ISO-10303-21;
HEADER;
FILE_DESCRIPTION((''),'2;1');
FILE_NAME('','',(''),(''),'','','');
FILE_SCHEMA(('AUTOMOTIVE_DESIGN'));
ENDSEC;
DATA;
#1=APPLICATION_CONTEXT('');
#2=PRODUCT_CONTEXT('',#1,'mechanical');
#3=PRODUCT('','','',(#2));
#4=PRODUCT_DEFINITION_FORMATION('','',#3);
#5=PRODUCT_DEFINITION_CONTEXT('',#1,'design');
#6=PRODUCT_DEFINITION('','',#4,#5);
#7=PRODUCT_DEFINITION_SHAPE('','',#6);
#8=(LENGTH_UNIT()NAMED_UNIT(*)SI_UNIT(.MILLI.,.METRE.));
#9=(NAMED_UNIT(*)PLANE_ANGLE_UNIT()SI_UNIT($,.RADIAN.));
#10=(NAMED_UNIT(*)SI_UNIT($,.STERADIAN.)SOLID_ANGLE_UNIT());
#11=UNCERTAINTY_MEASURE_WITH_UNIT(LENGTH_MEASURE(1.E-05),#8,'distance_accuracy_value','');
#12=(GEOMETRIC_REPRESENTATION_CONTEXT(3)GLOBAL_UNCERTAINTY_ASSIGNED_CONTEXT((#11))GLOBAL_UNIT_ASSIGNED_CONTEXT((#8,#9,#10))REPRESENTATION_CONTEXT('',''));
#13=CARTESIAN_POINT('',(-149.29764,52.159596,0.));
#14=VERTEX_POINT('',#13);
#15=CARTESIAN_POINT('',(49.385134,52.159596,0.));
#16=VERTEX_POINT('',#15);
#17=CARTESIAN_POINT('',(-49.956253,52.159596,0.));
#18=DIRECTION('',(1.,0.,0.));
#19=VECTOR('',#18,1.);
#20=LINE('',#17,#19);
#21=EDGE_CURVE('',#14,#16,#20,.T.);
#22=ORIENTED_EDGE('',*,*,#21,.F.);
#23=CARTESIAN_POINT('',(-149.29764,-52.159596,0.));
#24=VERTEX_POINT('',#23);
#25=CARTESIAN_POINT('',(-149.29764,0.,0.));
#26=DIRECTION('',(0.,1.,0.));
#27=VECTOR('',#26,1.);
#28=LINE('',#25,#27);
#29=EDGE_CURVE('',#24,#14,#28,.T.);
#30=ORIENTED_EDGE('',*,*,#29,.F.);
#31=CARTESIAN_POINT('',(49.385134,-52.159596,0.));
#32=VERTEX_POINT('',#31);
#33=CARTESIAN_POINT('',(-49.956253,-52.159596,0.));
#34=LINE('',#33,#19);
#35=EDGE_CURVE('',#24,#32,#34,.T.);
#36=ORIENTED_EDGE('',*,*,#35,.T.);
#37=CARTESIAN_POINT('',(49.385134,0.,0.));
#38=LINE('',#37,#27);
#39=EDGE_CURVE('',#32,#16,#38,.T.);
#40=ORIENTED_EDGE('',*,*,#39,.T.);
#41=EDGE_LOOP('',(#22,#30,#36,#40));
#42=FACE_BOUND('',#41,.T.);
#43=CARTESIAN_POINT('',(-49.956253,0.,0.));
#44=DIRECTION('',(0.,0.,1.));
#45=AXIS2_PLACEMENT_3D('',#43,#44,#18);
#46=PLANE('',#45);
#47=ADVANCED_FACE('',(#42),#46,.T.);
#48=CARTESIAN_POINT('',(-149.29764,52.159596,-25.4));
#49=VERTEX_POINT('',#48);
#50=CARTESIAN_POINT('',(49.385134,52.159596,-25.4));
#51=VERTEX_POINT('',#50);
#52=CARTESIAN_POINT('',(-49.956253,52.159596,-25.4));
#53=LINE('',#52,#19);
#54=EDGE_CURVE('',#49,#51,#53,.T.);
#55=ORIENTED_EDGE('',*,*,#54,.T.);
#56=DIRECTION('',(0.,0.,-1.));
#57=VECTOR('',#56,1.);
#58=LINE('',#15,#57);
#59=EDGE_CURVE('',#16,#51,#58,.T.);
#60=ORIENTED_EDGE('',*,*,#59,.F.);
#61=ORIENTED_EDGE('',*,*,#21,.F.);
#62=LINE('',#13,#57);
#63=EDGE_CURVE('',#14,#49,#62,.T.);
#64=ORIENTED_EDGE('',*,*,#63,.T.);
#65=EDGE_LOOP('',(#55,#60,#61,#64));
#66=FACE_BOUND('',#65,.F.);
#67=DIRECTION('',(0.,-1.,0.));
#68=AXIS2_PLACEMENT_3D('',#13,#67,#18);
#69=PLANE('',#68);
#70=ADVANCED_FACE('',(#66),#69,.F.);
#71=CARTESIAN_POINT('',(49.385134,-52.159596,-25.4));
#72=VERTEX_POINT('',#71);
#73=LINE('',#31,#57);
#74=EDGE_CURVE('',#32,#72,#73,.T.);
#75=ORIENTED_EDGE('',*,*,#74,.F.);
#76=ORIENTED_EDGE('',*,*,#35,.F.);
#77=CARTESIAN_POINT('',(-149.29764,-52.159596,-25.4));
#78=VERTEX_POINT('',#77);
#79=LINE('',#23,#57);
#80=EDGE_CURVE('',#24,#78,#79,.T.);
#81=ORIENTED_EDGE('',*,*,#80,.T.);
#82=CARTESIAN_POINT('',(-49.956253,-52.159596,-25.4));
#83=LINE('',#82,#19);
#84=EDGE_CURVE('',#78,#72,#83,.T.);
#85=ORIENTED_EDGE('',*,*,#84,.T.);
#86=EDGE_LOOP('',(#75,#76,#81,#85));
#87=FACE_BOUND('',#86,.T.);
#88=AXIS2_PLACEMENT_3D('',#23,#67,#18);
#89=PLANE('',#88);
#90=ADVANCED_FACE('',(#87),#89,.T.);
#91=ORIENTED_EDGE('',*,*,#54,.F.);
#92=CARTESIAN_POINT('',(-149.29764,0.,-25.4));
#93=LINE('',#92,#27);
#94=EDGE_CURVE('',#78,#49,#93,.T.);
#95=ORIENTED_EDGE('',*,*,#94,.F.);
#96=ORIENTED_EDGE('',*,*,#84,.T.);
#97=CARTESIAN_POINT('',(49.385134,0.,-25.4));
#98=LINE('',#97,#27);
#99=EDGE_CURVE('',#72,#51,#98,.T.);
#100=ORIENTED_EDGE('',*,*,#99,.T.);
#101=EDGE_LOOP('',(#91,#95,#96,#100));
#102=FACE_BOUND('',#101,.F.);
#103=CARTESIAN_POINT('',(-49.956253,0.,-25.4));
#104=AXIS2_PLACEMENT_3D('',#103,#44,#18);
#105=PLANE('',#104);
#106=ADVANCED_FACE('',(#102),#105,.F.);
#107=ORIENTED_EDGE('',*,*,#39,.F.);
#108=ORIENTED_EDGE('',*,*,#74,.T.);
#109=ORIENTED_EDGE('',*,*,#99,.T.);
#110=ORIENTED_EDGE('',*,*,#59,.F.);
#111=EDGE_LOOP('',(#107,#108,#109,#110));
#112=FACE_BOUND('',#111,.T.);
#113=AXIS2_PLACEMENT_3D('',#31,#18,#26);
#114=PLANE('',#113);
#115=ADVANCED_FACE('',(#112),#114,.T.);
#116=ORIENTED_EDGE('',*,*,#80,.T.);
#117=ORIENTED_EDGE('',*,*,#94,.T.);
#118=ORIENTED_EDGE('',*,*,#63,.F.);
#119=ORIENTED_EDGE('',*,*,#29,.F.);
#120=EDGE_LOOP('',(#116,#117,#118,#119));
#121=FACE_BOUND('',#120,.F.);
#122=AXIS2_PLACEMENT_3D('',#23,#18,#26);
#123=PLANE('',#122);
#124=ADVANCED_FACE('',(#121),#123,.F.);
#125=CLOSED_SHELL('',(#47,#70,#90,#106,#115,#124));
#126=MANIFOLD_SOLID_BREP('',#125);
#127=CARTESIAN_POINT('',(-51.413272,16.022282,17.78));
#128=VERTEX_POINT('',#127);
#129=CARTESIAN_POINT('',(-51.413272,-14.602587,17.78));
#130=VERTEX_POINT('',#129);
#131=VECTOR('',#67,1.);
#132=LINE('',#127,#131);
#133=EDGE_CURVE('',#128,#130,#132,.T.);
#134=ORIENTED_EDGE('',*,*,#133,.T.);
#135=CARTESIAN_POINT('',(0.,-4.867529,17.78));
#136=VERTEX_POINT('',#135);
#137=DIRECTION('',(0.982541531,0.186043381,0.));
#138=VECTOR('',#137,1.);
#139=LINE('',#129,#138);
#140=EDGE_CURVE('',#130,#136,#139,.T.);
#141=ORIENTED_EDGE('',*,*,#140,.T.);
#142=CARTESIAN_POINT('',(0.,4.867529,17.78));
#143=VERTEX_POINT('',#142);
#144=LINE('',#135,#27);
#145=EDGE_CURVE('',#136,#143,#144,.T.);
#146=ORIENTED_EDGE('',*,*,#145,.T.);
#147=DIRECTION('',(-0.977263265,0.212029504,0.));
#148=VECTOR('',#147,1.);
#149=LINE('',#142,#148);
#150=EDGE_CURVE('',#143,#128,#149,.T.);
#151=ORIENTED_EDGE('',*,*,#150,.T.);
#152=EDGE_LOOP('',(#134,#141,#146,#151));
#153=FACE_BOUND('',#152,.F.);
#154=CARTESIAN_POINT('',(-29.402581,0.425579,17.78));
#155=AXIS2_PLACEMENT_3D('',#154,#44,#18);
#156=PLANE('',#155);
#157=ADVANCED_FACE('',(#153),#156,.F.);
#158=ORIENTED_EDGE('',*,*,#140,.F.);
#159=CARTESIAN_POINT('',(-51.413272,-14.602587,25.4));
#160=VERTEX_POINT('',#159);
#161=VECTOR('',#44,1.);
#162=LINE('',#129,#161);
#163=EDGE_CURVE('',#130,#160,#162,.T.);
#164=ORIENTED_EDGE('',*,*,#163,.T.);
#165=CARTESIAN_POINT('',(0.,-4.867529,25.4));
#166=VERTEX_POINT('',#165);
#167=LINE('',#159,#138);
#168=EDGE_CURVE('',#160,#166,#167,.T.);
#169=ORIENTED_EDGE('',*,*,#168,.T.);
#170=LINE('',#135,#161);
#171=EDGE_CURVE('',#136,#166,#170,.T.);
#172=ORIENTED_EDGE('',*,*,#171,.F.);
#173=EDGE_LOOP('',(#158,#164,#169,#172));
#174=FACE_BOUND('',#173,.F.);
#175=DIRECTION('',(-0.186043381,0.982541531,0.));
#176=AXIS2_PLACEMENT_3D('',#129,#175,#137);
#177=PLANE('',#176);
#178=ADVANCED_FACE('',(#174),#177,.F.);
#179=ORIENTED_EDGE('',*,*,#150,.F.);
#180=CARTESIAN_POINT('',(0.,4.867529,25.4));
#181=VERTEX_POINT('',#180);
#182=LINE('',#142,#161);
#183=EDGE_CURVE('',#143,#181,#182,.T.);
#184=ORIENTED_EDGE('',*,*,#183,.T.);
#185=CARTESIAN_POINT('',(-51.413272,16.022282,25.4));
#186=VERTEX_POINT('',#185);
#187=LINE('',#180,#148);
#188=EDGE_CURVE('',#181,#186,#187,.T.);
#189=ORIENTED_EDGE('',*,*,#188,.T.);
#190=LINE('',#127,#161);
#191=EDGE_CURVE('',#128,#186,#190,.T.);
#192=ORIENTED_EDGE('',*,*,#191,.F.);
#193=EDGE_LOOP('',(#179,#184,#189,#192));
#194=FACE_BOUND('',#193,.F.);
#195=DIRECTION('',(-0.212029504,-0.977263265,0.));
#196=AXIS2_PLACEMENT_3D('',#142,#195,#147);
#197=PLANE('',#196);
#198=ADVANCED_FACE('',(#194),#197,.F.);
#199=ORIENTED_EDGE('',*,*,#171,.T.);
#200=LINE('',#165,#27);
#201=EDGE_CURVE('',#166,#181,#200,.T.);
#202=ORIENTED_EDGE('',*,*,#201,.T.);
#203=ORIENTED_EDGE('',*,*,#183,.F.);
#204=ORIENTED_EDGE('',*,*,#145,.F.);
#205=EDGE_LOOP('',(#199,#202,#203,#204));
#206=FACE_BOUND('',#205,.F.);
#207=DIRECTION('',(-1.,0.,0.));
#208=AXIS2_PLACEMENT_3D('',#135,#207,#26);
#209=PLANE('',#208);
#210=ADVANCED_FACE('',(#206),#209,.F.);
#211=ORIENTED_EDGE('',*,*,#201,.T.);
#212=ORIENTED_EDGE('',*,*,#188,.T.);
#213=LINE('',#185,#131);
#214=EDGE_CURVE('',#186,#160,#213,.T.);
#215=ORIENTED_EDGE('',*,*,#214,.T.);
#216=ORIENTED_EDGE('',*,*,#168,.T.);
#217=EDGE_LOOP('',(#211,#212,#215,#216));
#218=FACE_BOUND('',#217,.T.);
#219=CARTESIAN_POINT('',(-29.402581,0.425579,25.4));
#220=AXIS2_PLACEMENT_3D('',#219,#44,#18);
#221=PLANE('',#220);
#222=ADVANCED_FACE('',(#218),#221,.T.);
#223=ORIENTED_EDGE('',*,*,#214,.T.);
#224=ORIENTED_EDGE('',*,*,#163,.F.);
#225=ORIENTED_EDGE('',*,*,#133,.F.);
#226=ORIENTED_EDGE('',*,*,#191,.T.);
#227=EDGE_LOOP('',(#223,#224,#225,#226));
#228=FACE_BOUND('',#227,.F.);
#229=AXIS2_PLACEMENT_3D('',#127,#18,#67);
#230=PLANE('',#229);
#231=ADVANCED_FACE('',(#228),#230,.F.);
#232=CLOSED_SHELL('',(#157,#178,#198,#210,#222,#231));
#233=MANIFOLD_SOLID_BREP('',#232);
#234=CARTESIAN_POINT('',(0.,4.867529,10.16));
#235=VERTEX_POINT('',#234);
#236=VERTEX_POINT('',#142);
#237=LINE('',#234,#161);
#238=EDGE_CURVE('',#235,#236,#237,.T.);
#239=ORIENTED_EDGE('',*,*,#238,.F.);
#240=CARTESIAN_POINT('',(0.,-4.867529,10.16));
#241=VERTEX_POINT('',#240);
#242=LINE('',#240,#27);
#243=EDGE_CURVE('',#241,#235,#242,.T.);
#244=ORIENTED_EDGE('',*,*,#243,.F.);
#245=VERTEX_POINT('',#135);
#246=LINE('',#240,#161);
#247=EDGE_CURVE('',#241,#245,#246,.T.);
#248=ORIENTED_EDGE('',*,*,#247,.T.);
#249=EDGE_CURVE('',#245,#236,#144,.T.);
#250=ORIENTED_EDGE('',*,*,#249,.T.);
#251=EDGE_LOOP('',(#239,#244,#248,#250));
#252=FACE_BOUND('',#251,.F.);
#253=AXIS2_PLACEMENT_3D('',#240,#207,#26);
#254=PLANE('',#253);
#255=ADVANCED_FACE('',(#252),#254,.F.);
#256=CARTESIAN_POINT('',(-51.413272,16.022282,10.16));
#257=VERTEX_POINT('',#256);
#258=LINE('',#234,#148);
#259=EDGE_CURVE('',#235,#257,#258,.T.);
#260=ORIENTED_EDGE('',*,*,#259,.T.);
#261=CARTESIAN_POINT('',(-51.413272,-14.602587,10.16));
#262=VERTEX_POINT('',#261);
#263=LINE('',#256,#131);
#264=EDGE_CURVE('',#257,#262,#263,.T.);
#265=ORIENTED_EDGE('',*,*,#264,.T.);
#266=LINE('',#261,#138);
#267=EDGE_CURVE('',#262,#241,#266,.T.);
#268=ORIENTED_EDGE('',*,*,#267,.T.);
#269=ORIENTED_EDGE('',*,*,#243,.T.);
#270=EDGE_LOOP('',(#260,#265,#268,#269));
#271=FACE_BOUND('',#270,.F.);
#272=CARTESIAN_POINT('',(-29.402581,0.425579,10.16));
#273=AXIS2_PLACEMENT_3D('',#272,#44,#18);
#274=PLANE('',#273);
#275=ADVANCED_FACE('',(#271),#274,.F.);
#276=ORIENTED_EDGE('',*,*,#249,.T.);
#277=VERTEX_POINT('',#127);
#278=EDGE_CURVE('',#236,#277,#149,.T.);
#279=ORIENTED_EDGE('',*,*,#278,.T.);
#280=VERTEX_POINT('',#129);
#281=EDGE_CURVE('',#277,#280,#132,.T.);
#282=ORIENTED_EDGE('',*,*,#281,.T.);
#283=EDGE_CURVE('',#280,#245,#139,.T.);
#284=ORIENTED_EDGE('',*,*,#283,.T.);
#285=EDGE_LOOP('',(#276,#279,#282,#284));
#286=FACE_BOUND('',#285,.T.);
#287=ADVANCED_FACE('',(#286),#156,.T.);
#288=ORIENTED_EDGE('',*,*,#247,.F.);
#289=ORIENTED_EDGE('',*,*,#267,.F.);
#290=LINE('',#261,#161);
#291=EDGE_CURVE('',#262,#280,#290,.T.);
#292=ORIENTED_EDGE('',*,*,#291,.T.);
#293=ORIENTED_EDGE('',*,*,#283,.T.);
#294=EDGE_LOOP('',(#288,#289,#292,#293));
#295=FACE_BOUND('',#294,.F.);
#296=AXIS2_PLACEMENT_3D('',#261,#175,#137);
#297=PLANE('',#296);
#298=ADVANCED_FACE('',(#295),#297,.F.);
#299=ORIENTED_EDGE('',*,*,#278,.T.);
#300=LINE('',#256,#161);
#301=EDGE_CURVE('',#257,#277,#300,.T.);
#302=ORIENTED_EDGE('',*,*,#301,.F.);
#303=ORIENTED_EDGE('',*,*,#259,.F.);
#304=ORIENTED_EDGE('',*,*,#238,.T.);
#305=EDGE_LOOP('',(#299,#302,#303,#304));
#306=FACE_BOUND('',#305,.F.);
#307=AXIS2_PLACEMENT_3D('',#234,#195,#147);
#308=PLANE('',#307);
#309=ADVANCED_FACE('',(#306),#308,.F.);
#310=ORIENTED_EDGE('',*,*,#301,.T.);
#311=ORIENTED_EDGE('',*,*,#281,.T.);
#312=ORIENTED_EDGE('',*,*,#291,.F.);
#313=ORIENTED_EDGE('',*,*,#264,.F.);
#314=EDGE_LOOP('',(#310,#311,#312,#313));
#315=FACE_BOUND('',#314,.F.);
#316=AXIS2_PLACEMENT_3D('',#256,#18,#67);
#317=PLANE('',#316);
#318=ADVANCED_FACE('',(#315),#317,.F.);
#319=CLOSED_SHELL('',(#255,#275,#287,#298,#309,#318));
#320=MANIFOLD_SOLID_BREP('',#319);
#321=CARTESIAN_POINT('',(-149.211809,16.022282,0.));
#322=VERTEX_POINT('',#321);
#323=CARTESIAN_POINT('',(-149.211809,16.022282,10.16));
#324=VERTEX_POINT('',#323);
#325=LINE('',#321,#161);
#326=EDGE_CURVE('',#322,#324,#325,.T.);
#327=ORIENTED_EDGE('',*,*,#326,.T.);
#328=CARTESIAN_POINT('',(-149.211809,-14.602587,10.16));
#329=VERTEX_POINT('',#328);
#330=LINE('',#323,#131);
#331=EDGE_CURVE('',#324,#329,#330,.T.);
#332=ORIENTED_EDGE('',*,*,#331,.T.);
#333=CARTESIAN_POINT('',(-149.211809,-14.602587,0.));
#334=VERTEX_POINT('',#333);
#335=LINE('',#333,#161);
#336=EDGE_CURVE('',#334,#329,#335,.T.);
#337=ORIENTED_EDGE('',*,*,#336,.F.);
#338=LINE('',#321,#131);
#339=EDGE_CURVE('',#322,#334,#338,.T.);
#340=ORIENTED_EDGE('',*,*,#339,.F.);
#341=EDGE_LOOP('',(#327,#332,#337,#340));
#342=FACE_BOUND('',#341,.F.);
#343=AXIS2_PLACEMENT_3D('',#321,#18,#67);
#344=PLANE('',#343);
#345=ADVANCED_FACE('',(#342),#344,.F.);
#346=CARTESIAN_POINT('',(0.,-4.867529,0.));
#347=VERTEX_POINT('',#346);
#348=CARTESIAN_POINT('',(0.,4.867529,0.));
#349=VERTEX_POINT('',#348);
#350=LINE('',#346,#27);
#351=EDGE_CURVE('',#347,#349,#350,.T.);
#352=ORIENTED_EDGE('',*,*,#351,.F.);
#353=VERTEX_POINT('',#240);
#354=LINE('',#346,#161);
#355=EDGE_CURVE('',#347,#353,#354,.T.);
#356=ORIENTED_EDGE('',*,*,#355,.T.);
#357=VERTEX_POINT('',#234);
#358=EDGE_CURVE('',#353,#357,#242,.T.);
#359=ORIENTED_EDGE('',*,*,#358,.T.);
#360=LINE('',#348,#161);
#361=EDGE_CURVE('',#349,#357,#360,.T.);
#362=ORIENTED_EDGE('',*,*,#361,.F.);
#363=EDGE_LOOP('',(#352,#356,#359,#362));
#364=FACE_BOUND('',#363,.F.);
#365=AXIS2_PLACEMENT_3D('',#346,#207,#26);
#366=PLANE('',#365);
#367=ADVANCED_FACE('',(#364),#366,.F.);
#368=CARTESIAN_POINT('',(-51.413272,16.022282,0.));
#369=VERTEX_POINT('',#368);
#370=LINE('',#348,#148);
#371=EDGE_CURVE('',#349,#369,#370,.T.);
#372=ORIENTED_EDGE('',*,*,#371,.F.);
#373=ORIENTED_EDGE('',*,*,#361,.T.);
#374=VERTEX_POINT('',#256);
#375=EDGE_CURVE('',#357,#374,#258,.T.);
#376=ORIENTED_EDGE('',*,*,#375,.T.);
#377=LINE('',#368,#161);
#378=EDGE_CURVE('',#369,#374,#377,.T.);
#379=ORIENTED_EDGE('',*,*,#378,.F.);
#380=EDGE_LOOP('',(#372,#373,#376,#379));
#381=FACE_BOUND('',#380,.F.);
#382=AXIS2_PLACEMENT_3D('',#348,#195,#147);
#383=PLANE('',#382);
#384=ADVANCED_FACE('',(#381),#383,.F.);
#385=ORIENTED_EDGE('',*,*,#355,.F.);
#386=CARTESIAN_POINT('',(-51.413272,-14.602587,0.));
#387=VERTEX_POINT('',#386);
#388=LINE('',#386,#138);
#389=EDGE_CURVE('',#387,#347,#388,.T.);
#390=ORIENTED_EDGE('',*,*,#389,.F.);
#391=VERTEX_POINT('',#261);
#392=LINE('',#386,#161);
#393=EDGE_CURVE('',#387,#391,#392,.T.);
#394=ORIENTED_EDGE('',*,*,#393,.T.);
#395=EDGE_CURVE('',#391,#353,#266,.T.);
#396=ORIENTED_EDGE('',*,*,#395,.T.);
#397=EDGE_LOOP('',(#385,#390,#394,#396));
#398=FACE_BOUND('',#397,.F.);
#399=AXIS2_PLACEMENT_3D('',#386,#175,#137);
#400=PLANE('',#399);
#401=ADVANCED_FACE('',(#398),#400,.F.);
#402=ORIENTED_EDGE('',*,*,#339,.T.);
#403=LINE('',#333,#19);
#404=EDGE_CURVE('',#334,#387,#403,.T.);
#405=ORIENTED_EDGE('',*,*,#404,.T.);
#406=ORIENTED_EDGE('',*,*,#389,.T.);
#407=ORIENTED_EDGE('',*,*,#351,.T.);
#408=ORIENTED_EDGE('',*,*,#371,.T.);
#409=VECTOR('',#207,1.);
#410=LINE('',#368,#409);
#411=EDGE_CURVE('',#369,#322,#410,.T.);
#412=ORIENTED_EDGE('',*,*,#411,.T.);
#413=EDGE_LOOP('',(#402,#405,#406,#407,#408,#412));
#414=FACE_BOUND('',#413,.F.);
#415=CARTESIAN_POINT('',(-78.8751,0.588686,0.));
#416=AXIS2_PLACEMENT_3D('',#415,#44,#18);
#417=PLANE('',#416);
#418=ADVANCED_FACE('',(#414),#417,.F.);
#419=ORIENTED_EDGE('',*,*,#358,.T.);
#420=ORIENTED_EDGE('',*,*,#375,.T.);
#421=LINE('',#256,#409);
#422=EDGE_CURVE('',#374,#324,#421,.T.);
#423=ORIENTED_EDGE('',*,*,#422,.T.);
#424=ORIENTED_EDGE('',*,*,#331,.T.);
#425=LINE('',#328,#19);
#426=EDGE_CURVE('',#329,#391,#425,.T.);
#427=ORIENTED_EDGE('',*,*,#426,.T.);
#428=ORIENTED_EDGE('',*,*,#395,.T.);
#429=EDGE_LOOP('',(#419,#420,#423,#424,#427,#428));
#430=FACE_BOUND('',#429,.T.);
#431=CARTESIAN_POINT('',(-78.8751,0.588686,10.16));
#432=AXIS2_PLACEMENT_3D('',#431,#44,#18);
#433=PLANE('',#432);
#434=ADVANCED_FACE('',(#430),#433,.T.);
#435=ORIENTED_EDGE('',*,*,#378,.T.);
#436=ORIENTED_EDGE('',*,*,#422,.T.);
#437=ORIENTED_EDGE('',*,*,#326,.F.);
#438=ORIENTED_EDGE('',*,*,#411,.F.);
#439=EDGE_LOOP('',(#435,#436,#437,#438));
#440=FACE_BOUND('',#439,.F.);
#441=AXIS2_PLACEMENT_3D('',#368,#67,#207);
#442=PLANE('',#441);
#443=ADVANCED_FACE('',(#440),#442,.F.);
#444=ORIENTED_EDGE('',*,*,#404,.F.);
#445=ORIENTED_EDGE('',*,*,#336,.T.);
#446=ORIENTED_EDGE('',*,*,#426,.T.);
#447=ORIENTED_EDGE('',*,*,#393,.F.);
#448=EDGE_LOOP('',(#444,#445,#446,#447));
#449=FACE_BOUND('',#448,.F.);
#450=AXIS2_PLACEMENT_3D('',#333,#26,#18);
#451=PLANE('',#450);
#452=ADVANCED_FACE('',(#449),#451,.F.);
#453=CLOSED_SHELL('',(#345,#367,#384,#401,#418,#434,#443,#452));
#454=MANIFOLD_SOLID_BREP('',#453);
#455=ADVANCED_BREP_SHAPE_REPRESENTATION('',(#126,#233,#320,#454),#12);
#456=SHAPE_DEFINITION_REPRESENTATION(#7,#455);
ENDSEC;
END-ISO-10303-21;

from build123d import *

# Parameters (mm, degrees)
F0_W     = 198.6827738583
F0_H     = 104.3191924691
F1_DEPTH = 25.4
F3_DEPTH = 10.16
F5_DEPTH = 7.62
F7_DEPTH = 7.62


# Not quite as in the source:
# - a feature names something its author has since deleted; it is built from what else it names


with BuildPart() as f1:
    # F0 (on Top) → F1 (new body)
    with BuildSketch(Plane.XY):
        with Locations((-49.9562527984, 0)):
            Rectangle(F0_W, F0_H)
    extrude(amount=-F1_DEPTH)


with BuildPart() as f3:
    # F2 (on face) → F3 (new body)
    with BuildSketch(Plane.XY):
        Polygon((0, 4.8675285652), (-51.4132715762, 16.0222817212), (-149.2118090391, 16.0222817212), (-149.2118090391, -14.602586627), (-51.4132715762, -14.602586627), (0, -4.8675285652), align=None)
    extrude(amount=F3_DEPTH)


with BuildPart() as f5:
    # F4 (on face) → F5 (new body)
    with BuildSketch(Plane.XY.offset(10.16)):
        Polygon((0, 4.8675285652), (-51.4132715762, 16.0222817212), (-51.4132715762, -14.602586627), (0, -4.8675285652), align=None)
    extrude(amount=F5_DEPTH)


with BuildPart() as f7:
    # F6 (on face) → F7 (new body)
    with BuildSketch(Plane.XY.offset(17.78)):
        Polygon((0, 4.8675285652), (-51.4132715762, 16.0222817212), (-51.4132715762, -14.602586627), (0, -4.8675285652), align=None)
    extrude(amount=F7_DEPTH)


solid = Compound([f1.part, f3.part, f5.part, f7.part])
